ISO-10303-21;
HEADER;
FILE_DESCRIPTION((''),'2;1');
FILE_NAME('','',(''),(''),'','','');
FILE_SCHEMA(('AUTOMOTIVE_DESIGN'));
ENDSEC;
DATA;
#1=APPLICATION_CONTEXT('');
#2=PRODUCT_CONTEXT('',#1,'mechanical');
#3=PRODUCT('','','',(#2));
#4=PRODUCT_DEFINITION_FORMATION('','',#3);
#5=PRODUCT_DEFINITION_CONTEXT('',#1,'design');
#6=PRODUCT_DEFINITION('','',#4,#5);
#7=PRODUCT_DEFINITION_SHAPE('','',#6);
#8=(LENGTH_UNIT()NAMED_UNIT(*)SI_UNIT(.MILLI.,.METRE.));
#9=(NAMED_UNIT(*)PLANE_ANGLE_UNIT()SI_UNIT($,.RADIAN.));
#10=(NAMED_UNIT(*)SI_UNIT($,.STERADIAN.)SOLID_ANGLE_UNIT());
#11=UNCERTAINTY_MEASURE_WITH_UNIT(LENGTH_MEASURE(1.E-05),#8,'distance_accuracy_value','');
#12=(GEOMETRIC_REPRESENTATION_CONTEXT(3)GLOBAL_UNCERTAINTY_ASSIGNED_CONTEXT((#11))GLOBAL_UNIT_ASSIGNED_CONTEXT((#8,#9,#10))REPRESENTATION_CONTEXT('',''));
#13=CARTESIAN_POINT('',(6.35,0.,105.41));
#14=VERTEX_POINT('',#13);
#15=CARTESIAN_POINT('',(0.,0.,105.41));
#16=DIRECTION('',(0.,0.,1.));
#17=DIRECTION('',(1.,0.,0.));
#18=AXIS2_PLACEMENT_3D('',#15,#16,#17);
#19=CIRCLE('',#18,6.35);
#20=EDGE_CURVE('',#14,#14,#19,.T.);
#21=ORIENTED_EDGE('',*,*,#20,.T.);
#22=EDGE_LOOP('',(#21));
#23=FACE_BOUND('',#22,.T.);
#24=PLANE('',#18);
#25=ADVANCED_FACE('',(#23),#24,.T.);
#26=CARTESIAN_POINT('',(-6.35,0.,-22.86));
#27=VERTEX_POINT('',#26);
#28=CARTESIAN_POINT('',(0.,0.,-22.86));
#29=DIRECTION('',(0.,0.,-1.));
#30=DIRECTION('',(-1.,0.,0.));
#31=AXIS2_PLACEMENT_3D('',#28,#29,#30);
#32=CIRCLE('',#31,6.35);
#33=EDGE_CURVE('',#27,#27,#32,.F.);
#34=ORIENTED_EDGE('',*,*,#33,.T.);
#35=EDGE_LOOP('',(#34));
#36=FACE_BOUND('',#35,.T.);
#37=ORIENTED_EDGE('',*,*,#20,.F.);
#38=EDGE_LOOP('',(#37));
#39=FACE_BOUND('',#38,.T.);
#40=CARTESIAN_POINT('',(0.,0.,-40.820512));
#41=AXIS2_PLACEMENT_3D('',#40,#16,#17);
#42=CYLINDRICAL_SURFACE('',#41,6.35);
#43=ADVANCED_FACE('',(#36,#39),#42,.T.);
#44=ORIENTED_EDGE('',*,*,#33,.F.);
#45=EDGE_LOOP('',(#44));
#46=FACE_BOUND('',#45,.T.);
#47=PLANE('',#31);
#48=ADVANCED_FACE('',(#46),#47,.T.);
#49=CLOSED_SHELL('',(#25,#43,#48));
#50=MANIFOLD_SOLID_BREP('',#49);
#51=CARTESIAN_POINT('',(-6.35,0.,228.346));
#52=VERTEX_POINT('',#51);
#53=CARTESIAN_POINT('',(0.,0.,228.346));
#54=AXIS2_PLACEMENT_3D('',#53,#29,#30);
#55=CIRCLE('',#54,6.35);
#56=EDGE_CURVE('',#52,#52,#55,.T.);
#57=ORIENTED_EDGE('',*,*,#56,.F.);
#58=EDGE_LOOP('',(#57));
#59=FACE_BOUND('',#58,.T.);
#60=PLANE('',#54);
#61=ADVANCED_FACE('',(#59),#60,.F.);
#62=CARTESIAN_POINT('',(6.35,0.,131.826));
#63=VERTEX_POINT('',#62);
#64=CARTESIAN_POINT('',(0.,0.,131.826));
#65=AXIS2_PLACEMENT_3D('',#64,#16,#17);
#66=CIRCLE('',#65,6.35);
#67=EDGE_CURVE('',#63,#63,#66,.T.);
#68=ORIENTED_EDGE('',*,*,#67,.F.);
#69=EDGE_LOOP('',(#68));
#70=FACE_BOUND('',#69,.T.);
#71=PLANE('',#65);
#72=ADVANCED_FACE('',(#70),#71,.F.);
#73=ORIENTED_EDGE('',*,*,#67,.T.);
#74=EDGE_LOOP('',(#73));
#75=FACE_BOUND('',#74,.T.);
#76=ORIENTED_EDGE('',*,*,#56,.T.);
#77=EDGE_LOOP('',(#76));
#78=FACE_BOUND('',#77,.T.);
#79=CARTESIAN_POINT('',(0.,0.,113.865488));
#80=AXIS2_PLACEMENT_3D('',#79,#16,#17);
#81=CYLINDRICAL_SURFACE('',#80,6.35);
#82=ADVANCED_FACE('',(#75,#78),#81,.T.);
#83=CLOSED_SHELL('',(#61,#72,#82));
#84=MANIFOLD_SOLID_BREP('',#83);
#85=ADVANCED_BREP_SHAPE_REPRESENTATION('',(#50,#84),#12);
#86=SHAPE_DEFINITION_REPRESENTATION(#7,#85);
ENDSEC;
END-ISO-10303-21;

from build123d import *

# Parameters (mm, degrees)
BOSS_EXTRUDE1_OUTLINE_R = 6.35
BOSS_EXTRUDE1_DEPTH     = 96.52
SKETCH3_R               = 6.35
BOSS_EXTRUDE2_DEPTH     = 128.27


# Read off the part's stored shape, not the designer's step: Boss-Extrude1
with BuildPart() as part:
    # Boss-Extrude1 outline → Boss-Extrude1 (new body)
    with BuildSketch(Plane(origin=(0, 0, 228.346), x_dir=(-1, 0, 0), z_dir=(0, 0, -1))):
        Circle(BOSS_EXTRUDE1_OUTLINE_R)
    extrude(amount=BOSS_EXTRUDE1_DEPTH)


with BuildPart() as body_2:
    # Sketch3 → Boss-Extrude2 (new body)
    with BuildSketch(Plane.XY.offset(105.41)):
        Circle(SKETCH3_R)
    extrude(amount=-BOSS_EXTRUDE2_DEPTH)


solid = Compound([part.part, body_2.part])
